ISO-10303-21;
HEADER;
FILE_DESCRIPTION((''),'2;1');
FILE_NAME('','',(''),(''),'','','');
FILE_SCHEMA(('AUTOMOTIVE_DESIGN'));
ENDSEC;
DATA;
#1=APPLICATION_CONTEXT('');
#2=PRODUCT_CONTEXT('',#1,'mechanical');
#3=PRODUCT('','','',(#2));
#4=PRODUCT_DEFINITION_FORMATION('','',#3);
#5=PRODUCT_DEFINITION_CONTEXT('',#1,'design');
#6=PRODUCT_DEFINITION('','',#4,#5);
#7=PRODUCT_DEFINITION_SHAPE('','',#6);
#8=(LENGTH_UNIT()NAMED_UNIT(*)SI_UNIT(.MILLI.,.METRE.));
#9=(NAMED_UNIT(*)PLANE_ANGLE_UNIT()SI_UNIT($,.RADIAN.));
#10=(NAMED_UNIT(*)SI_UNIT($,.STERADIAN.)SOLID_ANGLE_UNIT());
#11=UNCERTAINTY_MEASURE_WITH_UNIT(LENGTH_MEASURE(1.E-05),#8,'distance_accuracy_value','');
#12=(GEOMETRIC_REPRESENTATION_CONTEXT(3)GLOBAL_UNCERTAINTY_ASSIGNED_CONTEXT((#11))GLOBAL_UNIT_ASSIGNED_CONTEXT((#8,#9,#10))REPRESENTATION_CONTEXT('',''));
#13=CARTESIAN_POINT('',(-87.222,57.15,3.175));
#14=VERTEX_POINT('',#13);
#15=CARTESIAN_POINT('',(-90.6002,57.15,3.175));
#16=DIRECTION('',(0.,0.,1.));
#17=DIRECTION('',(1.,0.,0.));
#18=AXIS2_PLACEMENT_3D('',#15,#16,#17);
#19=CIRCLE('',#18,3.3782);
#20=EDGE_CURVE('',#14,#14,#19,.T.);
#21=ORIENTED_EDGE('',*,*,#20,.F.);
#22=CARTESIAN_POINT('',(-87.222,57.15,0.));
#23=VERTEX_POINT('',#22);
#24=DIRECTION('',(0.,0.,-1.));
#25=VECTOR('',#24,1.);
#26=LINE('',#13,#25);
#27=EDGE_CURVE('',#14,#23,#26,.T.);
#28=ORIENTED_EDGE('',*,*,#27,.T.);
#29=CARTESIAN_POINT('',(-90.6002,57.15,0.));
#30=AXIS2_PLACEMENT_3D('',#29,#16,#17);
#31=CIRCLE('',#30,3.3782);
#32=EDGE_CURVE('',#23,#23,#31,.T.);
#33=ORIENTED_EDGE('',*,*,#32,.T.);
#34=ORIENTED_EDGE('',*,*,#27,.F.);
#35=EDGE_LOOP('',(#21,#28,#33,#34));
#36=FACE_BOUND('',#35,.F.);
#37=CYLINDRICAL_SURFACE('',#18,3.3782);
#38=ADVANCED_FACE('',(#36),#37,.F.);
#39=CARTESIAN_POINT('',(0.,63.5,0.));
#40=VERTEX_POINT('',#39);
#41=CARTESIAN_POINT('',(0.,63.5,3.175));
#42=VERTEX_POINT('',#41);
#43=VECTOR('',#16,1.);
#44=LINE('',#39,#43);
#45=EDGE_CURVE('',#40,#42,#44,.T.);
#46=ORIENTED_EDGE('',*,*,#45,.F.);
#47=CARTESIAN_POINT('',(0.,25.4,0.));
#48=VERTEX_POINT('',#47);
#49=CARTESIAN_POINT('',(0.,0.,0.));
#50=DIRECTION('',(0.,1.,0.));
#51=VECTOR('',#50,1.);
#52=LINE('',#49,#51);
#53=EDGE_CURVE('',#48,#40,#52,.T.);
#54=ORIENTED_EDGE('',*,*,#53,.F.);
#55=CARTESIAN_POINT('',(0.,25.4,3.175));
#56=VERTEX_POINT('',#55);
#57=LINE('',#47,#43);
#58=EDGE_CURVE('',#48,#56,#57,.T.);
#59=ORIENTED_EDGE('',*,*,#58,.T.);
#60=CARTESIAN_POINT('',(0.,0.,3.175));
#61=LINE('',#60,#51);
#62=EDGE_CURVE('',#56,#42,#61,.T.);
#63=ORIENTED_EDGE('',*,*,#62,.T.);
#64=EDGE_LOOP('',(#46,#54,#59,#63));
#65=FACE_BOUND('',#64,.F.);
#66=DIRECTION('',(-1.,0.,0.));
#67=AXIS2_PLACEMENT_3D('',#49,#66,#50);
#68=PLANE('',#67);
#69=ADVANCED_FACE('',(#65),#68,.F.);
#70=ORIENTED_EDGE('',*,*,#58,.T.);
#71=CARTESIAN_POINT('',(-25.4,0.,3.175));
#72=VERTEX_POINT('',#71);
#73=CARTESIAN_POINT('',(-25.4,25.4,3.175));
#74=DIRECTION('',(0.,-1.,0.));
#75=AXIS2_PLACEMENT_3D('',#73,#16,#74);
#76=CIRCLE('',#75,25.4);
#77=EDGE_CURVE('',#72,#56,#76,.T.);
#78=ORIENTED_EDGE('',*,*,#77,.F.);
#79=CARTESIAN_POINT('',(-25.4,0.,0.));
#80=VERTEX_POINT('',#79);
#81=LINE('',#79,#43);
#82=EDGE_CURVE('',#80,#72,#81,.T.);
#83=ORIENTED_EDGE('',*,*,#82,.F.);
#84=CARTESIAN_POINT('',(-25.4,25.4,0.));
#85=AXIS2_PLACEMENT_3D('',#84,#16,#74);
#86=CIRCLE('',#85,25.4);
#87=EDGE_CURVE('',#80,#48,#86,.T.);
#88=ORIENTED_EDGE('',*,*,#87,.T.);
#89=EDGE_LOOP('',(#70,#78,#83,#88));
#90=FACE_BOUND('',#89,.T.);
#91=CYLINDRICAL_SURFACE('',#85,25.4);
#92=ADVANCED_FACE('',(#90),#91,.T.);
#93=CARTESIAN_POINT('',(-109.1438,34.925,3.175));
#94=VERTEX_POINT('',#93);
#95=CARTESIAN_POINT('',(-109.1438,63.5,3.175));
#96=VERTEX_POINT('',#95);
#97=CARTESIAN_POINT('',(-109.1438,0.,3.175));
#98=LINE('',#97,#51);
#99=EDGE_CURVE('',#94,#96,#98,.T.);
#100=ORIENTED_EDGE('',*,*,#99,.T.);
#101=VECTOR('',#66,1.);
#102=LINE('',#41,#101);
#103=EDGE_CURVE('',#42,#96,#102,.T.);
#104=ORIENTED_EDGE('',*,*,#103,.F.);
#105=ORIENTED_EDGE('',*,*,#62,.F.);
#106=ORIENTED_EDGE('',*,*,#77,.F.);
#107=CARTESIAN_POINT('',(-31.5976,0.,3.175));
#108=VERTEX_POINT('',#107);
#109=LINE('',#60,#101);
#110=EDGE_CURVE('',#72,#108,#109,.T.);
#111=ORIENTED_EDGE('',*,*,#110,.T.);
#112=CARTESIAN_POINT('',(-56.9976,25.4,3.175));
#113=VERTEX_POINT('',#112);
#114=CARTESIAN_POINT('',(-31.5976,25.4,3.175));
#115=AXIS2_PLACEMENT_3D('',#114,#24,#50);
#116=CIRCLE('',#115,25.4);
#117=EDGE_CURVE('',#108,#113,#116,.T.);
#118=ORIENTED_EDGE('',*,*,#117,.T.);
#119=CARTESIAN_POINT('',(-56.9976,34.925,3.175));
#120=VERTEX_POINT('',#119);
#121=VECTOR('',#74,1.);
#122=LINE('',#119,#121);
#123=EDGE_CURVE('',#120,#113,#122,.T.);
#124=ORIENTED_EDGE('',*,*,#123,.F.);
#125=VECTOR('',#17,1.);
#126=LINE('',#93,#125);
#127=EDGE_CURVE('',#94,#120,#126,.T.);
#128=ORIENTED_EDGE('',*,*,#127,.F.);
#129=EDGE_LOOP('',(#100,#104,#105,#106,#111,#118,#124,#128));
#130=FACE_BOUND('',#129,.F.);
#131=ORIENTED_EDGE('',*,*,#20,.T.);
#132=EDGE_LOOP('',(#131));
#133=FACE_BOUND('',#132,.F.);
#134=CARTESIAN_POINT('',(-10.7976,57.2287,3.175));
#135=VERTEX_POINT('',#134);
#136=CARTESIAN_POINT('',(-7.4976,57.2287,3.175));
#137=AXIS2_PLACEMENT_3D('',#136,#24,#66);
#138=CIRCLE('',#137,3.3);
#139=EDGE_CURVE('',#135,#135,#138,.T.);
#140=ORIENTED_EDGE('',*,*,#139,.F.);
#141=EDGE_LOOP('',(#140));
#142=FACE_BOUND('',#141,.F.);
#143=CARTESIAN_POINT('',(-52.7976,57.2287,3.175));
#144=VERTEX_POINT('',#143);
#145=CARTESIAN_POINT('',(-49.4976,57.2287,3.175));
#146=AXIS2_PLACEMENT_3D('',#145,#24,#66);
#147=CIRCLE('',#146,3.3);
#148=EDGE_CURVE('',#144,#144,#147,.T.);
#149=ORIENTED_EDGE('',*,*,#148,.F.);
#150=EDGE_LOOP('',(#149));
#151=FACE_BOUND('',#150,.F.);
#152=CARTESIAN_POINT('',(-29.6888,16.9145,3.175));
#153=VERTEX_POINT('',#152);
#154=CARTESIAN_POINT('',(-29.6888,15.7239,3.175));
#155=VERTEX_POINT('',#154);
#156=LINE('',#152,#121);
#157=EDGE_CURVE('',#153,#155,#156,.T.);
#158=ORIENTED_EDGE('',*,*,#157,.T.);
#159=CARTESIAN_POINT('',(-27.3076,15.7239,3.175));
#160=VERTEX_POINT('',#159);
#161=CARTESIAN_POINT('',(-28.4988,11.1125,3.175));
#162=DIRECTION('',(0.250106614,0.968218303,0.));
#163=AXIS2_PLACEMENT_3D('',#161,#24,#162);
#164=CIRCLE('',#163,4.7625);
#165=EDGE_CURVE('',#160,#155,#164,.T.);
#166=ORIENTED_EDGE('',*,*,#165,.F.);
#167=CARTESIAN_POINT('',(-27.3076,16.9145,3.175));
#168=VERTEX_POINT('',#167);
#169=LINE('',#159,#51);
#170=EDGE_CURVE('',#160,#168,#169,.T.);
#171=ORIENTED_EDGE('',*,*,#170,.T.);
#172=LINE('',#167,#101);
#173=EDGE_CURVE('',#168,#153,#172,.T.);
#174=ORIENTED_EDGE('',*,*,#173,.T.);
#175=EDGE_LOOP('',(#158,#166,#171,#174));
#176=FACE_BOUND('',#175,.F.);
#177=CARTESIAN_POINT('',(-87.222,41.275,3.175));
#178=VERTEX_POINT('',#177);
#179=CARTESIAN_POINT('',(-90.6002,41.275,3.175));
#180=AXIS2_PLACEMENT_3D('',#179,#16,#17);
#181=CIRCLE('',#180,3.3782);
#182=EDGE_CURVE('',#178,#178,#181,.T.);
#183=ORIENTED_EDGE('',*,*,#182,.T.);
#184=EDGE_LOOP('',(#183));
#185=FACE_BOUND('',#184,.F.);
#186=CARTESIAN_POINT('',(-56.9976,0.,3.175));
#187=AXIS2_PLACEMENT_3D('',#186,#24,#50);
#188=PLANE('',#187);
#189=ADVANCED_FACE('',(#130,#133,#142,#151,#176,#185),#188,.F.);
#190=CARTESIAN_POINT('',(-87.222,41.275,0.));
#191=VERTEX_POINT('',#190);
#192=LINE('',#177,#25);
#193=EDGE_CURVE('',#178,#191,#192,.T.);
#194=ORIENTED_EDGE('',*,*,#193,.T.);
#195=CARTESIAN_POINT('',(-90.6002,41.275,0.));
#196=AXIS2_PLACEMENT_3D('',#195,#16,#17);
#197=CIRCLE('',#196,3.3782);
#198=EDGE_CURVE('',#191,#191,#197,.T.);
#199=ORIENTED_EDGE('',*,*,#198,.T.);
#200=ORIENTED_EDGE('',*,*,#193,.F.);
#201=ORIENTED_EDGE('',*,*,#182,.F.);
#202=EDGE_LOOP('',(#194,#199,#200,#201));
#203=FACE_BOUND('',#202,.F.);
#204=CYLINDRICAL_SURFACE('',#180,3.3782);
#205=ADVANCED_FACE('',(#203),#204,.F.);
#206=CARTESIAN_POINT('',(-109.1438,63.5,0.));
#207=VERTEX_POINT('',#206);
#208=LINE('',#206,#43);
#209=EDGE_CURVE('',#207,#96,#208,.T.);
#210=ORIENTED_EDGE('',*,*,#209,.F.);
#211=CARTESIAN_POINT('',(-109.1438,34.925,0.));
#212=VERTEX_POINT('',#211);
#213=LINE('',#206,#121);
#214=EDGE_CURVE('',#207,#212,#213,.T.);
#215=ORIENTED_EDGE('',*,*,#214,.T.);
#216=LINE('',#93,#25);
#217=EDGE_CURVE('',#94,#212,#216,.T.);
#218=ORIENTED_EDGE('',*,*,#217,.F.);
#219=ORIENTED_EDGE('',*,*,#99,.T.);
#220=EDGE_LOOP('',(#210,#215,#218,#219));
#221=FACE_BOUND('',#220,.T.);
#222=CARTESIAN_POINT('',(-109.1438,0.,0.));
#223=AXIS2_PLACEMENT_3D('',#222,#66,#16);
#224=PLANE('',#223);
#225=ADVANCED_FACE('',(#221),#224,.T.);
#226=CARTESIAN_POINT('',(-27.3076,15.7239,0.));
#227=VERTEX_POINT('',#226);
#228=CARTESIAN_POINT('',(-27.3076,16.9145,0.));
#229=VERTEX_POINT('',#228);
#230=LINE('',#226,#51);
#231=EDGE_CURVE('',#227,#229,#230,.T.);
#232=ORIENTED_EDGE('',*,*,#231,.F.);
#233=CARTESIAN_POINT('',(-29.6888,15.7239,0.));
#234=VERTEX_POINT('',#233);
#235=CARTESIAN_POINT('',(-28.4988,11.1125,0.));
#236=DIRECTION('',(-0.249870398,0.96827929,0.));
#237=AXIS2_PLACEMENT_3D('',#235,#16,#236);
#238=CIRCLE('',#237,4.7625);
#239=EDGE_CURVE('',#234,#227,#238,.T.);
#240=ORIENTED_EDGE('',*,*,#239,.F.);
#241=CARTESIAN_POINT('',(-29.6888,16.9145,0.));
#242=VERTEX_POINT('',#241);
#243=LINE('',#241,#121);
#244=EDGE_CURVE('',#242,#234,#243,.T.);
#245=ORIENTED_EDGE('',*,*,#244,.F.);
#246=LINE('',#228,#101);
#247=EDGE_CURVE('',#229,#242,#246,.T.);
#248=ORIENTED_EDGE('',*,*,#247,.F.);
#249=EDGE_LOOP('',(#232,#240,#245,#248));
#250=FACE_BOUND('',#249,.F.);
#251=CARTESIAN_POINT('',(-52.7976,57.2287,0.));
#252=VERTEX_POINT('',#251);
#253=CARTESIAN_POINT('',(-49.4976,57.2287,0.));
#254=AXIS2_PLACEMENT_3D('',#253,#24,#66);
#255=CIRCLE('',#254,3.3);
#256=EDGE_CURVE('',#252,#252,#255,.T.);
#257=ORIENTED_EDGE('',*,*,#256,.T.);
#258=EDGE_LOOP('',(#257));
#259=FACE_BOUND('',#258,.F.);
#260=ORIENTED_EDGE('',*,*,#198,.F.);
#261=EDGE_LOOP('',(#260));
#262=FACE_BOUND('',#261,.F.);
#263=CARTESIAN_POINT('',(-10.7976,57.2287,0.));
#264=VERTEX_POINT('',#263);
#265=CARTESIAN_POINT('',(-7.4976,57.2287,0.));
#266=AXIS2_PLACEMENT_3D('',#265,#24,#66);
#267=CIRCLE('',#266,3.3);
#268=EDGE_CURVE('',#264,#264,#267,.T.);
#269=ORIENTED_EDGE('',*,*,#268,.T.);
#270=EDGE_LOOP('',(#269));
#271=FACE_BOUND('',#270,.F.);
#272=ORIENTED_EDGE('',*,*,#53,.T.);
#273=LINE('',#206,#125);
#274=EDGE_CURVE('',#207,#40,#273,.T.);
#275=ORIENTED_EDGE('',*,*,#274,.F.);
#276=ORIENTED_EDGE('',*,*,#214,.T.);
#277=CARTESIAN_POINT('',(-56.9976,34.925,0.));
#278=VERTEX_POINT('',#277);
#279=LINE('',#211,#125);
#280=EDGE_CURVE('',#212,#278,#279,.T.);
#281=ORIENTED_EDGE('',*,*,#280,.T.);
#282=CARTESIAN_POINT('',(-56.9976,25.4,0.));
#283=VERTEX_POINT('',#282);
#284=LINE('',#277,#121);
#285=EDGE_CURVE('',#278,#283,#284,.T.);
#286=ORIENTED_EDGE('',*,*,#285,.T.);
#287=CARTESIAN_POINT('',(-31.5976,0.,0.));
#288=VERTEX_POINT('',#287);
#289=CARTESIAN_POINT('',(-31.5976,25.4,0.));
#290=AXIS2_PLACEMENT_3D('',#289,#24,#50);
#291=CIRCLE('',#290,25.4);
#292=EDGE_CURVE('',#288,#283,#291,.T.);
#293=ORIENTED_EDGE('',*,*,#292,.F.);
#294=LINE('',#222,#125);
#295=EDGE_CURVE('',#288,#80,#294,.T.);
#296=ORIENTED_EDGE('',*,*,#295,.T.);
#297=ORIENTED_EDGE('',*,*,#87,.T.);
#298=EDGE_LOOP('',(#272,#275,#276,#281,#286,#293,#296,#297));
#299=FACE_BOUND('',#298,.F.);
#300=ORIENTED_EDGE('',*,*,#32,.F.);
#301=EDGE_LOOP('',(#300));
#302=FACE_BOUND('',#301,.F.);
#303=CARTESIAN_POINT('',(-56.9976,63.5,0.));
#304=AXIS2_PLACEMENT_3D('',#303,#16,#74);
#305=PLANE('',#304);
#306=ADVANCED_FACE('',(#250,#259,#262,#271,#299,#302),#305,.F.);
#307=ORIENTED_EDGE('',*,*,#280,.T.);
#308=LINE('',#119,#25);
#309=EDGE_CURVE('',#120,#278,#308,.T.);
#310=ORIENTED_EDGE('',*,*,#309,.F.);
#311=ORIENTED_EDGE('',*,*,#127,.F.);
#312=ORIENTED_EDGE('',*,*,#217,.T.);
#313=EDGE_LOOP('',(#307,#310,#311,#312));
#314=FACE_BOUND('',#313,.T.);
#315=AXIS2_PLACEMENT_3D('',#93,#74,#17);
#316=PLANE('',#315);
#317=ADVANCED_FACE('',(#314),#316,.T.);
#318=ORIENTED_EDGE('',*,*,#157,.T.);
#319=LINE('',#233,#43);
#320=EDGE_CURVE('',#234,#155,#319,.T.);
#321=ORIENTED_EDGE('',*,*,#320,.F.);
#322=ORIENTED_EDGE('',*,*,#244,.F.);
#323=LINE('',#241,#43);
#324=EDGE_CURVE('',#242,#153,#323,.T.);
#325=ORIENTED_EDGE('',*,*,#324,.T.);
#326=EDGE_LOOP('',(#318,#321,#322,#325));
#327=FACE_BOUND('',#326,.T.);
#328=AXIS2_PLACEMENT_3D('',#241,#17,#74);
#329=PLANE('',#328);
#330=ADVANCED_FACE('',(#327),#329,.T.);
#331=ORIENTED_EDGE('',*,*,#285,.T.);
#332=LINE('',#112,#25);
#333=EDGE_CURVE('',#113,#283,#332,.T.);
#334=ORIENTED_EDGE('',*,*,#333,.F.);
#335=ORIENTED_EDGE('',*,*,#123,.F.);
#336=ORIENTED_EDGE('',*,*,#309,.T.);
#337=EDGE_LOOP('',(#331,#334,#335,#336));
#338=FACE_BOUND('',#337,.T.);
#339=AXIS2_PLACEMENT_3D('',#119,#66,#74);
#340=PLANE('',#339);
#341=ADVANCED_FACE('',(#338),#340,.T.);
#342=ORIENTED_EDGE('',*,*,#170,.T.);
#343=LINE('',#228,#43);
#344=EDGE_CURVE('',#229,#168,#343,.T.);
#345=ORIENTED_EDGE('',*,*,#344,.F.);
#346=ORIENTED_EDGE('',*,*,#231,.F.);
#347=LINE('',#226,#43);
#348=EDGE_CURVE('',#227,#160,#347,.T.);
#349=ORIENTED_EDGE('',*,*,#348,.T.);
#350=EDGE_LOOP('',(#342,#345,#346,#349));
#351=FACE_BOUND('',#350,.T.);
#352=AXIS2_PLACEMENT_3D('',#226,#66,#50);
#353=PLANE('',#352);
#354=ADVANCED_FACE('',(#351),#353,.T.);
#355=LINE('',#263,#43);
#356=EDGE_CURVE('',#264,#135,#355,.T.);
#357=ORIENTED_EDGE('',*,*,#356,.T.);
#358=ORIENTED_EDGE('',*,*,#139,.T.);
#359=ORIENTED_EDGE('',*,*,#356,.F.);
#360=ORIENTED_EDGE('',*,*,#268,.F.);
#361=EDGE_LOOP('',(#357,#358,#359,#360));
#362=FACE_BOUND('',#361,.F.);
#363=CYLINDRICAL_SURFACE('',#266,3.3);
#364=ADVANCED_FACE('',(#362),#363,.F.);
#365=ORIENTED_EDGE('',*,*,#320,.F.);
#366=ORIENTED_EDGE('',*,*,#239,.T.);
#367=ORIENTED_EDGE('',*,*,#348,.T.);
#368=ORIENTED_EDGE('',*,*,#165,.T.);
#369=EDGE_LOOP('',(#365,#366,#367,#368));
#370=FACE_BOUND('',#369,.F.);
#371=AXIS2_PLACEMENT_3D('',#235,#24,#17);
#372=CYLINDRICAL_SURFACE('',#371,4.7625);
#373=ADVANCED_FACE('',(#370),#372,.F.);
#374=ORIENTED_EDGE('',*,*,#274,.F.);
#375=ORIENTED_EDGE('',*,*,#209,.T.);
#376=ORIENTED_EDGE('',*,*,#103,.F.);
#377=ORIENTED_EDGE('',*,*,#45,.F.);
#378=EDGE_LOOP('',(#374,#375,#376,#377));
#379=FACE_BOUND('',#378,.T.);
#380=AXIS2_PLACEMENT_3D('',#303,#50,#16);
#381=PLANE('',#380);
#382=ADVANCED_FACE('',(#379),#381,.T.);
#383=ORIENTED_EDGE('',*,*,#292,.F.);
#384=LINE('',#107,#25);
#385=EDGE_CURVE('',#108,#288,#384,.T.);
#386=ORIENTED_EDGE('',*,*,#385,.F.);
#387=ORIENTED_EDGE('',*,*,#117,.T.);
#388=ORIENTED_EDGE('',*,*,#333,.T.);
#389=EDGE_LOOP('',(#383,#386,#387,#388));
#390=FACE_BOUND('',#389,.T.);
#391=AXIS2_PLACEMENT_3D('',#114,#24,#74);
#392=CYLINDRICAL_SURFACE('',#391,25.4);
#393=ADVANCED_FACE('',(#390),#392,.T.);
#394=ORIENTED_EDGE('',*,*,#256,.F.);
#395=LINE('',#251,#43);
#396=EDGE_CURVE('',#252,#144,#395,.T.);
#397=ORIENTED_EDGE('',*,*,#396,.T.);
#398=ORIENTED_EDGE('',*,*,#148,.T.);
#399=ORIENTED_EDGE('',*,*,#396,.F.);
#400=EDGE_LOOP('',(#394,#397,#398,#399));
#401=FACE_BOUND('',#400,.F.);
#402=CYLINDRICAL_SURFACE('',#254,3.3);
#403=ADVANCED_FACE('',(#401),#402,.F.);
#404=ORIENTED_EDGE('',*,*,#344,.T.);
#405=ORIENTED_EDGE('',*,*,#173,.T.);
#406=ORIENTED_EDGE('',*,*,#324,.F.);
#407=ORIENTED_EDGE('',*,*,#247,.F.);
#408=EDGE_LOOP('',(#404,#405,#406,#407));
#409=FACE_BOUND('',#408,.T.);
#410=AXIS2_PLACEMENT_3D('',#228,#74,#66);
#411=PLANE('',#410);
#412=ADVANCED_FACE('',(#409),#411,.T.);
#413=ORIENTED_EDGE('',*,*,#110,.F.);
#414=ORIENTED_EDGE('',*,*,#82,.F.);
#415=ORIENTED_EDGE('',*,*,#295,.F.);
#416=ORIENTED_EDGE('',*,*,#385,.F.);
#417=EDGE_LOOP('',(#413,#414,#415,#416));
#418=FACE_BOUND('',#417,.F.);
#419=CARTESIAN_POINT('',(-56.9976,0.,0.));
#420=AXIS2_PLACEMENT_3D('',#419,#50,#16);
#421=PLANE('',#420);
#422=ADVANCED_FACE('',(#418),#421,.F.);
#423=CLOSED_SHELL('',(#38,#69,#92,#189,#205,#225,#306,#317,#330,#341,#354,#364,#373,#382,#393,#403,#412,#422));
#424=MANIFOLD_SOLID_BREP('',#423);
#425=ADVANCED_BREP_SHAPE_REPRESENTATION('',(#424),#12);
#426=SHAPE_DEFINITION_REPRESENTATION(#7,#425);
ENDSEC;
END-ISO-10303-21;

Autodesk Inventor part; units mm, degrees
ref_plane "YZ Plane" through (0, 0, 0) normal (1, 0, 0) x (0, 1, 0)
ref_plane "XZ Plane" through (0, 0, 0) normal (0, 1, 0) x (-1, 0, 0)
ref_plane "XY Plane" through (0, 0, 0) normal (0, 0, 1) x (1, 0, 0)
sketch "Sketch1" plane through (0, 0, 0) normal (0, 0, 1) x (1, 0, 0)
  line L0 (-56.9976, 63.5) -> (0, 63.5)
  line L1 (0, 63.5) -> (-7.493, 63.5)
  line L2 (-7.493, 63.5) -> (-7.493, 57.15)
  line L3 (-56.9976, 63.5) -> (-49.5046, 63.5)
  line L4 (-49.5046, 63.5) -> (-49.5046, 57.15)
  line L5 (-56.9976, 63.5) -> (-56.9976, 0)
  line L6 (-56.9976, 0) -> (0, 0)
  line L7 (0, 0) -> (0, 63.5)
  line L8 (-28.4988, 0) -> (-28.4988, 11.1125)
  circle A0 centre (-28.4988, 11.1125) radius 4.7625
  dimension "d3" = 7.493
  dimension "d4" = 6.35
  dimension "d5" = 7.493
  dimension "d19" = 6.35
  dimension "d60" = 63.5
  dimension "d61" = 11.1125
  dimension "d62" = 9.525
extrude "Plate6" add sketch "Sketch1" along normal blind 3.175
sketch "Sketch6" plane through (0, 0, 0) normal (0, 0, -1) x (-1, 0, 0)
  line L0 (56.9976, 63.5) -> (56.9976, 0) projected
  line L1 (28.4988, 11.1125) -> (27.3076, 11.1125)
  line L2 (28.4988, 11.1125) -> (29.6894, 11.1125)
  circle A0 centre (28.4988, 11.1125) radius 4.7625
  circle A1 centre (28.4988, 11.1125) radius 4.7625 projected
  line L3 (27.3076, 11.1125) -> (29.6888, 11.1125)
  line L4 (29.6888, 11.1125) -> (29.6888, 15.7239)
  line L5 (29.6888, 15.7239) -> (27.3076, 15.7239)
  line L6 (27.3076, 15.7239) -> (27.3076, 11.1125)
  line L7 (27.3076, 15.7239) -> (27.3076, 16.9145)
  line L8 (27.3076, 16.9145) -> (29.6888, 16.9145)
  line L9 (29.6888, 16.9145) -> (29.6888, 15.7239)
  point P0 (27.2012, 15.6948)
  point P1 (30.5454, 15.4129)
  dimension "d82" = 1.1906
  dimension "d86" = 2.3813
  dimension "d87" = 1.1906
extrude "Cut1" cut sketch "Sketch6" against normal blind 3.175 contours L7 L8 L9 A0 | A0 L5
sketch "Sketch7" plane through (-56.9976, 0, 0) normal (-1, 0, 0) x (0, 0, 1)
  line L0 (3.175, 0) -> (3.175, 63.5) projected
  line L1 (0, 63.5) -> (3.175, 63.5) projected
  line L2 (0, 63.5) -> (0, 0) projected
  line L3 (0, 0) -> (3.175, 0) projected
extrude "Extrusion2" add sketch "Sketch7" along normal blind 52.1462
sketch "Sketch8" plane through (0, 0, 3.175) normal (0, 0, 1) x (1, 0, 0)
  line L0 (0, 0) -> (-109.1438, 0) projected
  line L1 (-109.1438, 0) -> (-109.1438, 63.5) projected
  line L2 (-109.1438, 63.5) -> (-109.1438, 34.925)
  line L3 (-109.1438, 34.925) -> (-56.9976, 34.925)
  line L4 (-56.9976, 34.925) -> (-56.9976, 0)
  circle A0 centre (-75.5412, 57.15) radius 3.3782 projected
  circle A1 centre (-75.5412, 41.275) radius 3.3782 projected
  dimension "d71" = 28.575
  dimension "d72" = 52.1462
sketch "Sketch9" plane through (0, 0, 0) normal (0, 0, -1) x (-1, 0, 0)
  circle A0 centre (49.4976, 57.2287) radius 3.3
  circle A1 centre (7.4976, 57.2287) radius 3.3
extrude "Cut3" cut sketch "Sketch9" against normal blind 3.175
extrude "Cut4" cut sketch "Sketch8" against normal blind 3.175 contours L0 L1 L3 L4
sketch "Sketch10" plane through (0, 0, 3.175) normal (0, 0, 1) x (1, 0, 0)
  circle A0 centre (-90.6002, 57.15) radius 3.3782 projected
  circle A1 centre (-90.6002, 41.275) radius 3.3782 projected
extrude "Cut5" cut sketch "Sketch10" against normal blind 3.175
fillet "Fillet1" radius 25.4 2 edges at (-56.9976, 0, 1.5875) (0, 0, 1.5875)
sketch "Sketch11" plane through (0, 0, 3.175) normal (0, 0, 1) x (1, 0, 0)
  circle A0 centre (-90.6002, 57.15) radius 3.3782 projected
  circle A1 centre (-90.6002, 41.275) radius 3.3782 projected
  arc A2 (-25.4, 0) -> (0, 25.4) centre (-25.4, 25.4) ccw projected
  line L0 (0, 63.5) -> (0, 25.4) projected
  line L1 (-109.1438, 63.5) -> (0, 63.5) projected
  line L2 (-109.1438, 34.925) -> (-109.1438, 63.5) projected
  line L3 (-109.1438, 34.925) -> (-56.9976, 34.925) projected
  line L4 (-56.9976, 34.925) -> (-56.9976, 25.4) projected
  arc A3 (-56.9976, 25.4) -> (-31.5976, 0) centre (-31.5976, 25.4) ccw projected
  line L5 (-25.4, 0) -> (-31.5976, 0) projected
  circle A4 centre (-49.4976, 57.2287) radius 3.3 projected
  circle A5 centre (-7.4976, 57.2287) radius 3.3 projected
  line L6 (-29.6888, 15.7239) -> (-29.6888, 16.9145) projected
  line L7 (-29.6888, 16.9145) -> (-27.3076, 16.9145) projected
  line L8 (-27.3076, 16.9145) -> (-27.3076, 15.7239) projected
  line L9 (-27.3076, 15.7239) -> (-27.3088, 15.7239) projected
  arc A6 (-29.6888, 15.7239) -> (-27.3088, 15.7239) centre (-28.4988, 11.1125) ccw projected
  point P0 (0, 0)
equation "\"d67\" = Thickness"
equation "\"d75\" = Thickness"
equation "\"d77\" = Thickness"
equation "\"d79\" = Thickness"
equation "\"BendRadius\" = Thickness"
equation "\"BendReliefWidth\" = Thickness"
equation "\"BendReliefDepth\" = 0.5 * Thickness"
equation "\"CornerReliefSize\" = 4 * Thickness"
equation "\"MinimumRemnant\" = 2 * Thickness"
equation "\"TransitionRadius\" = BendRadius"
equation "\"JacobiRadiusSize\" = BendRadius"
equation "\"GapSize\" = Thickness"
equation "\"d8\" = BendRadius"
equation "\"d56\" = BendRadius"
equation "\"d63\" = BendRadius"
equation "\"Thickness\" = 3.175"
properties part number "arm mout" material "Steel"
